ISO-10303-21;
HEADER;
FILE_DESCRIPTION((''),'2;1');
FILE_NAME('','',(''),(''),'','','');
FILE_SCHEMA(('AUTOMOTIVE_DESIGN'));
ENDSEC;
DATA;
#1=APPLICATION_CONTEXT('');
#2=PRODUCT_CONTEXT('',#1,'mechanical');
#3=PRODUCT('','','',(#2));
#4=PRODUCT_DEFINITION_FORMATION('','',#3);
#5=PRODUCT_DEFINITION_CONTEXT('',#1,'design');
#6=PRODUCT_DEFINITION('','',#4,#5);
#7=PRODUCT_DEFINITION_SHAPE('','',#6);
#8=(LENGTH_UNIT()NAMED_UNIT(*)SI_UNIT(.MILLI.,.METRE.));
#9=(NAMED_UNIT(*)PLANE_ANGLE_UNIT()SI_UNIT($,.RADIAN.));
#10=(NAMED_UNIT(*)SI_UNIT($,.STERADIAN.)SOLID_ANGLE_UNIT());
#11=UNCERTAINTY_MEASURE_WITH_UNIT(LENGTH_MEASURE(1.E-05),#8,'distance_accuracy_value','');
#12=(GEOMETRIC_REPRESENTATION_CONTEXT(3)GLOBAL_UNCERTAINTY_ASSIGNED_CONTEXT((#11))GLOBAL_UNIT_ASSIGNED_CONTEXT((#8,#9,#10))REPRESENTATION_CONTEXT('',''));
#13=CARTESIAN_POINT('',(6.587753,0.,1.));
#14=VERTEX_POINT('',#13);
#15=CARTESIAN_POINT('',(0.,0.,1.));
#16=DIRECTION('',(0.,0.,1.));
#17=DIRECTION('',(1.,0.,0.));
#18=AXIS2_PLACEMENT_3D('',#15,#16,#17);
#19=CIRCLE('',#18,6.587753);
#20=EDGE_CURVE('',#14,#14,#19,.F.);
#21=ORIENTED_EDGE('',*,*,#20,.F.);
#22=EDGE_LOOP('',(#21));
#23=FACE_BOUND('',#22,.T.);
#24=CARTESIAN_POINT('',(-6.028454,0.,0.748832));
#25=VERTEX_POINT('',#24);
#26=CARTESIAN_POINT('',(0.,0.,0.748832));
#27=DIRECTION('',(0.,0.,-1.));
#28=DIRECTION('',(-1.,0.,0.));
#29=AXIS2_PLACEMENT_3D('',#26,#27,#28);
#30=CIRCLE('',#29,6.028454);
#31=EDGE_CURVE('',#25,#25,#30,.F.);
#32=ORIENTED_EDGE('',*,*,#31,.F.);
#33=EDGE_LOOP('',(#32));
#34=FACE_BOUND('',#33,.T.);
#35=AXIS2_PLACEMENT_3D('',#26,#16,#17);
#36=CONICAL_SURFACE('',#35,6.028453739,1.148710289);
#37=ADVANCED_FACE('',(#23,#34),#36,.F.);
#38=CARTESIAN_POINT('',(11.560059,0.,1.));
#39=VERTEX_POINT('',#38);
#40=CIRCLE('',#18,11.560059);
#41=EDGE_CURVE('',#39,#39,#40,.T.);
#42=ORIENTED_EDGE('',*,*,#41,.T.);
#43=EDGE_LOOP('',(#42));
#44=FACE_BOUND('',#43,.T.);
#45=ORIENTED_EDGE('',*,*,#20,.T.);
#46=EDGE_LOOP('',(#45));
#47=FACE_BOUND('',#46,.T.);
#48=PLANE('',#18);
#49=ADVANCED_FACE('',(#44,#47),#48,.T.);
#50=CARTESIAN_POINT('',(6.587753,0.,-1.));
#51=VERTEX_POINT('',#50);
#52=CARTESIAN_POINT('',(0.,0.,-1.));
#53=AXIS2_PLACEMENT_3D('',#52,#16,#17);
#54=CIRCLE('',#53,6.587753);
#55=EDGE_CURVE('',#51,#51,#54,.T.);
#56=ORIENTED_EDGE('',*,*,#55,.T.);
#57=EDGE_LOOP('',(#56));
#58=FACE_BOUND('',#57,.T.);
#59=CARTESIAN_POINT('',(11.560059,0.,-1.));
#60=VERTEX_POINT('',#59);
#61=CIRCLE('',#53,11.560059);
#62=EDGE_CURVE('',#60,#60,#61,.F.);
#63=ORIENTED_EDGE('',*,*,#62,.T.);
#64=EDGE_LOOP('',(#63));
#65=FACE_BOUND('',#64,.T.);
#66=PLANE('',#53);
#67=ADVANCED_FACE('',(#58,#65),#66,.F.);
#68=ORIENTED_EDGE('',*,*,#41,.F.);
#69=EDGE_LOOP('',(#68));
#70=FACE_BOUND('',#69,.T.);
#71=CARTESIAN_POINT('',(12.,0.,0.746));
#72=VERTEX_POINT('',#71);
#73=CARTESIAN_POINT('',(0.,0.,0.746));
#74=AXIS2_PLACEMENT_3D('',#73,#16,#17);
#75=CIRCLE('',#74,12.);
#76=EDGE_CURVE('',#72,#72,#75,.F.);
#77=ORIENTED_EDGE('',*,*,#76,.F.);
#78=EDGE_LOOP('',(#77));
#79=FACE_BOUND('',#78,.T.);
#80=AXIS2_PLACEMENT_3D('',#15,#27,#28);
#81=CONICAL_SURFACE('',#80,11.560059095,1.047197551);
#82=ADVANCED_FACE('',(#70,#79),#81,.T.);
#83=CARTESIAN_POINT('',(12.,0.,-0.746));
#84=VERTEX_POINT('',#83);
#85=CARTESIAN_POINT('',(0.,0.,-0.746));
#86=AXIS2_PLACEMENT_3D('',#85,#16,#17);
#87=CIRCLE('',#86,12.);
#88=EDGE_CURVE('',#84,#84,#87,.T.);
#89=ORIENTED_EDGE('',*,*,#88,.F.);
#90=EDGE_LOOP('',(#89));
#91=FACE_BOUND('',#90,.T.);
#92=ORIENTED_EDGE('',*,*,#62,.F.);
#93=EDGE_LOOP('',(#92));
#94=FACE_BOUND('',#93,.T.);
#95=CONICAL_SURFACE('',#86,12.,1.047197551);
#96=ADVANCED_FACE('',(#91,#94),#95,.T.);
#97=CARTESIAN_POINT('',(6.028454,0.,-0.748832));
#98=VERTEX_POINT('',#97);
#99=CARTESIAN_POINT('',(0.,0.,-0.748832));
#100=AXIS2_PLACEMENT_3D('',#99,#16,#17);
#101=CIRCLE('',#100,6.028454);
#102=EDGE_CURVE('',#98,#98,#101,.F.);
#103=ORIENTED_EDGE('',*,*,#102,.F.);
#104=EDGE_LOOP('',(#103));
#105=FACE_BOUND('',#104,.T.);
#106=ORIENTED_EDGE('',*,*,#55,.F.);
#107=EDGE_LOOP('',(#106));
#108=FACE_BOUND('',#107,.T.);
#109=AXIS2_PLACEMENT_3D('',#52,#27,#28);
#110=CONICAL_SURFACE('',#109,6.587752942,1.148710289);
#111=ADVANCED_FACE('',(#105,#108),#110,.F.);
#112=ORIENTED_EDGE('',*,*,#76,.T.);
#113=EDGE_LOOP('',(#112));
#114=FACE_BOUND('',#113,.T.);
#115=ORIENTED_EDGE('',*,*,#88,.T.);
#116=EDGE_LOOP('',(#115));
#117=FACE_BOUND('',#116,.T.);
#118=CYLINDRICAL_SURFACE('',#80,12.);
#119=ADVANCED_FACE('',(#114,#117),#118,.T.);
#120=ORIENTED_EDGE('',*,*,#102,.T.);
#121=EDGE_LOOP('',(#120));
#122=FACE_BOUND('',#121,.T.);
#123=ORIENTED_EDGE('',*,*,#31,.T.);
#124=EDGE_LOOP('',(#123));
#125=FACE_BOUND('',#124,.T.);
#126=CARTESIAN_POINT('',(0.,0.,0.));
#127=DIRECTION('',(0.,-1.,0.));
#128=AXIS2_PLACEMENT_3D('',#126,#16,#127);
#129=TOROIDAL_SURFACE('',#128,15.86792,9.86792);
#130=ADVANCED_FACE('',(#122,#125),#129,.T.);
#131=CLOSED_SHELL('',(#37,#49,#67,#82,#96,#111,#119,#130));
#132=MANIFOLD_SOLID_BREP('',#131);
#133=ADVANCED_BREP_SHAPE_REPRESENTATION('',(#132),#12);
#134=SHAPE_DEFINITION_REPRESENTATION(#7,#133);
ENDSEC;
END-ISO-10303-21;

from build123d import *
from OCP.BRepFilletAPI import BRepFilletAPI_MakeChamfer

# Parameters (mm, degrees)
BOSS_EXTRUDE1_DEPTH      = 1
BOSS_EXTRUDE1_DEPTH_BACK = 1
SKETCH3_R                = 12
SKETCH3_R_2              = 6
CHAMFER1_SIZE            = 0.254
CHAMFER1_SIZE2           = 0.439940905
CHAMFER2_SIZE            = 0.536952942


with BuildPart() as part:
    # Sketch3 → Boss-Extrude1 (new, two sides: drawn at the far end of the back side and taken through both)
    with BuildSketch(Plane.XY.offset(-BOSS_EXTRUDE1_DEPTH_BACK)):
        Circle(SKETCH3_R)
        Circle(SKETCH3_R_2, mode=Mode.SUBTRACT)
    extrude(amount=BOSS_EXTRUDE1_DEPTH + BOSS_EXTRUDE1_DEPTH_BACK)

    # Chamfer1: one chamfer whose edges measure the first distance from different faces: ONE call of the kernel's chamfer builder (chamfer() names one face for all edges)
    chamfer1_edges_1 = [part.edges().sort_by_distance(p)[0] for p in [
        (-12, 0, 1),
    ]]
    chamfer1_side_1 = [part.faces().sort_by_distance(p)[0] for p in [
        (-12, 0, 0.5),
    ]]
    chamfer1_edges_2 = [part.edges().sort_by_distance(p)[0] for p in [
        (-12, 0, -1),
    ]]
    chamfer1_side_2 = [part.faces().sort_by_distance(p)[0] for p in [
        (-12, 0, -0.5),
    ]]
    chamfer1 = BRepFilletAPI_MakeChamfer(part.part.solid().wrapped)
    for e in chamfer1_edges_1:
        chamfer1.Add(CHAMFER1_SIZE, CHAMFER1_SIZE2, e.wrapped, chamfer1_side_1[0].wrapped)  # the first distance lies on this face
    for e in chamfer1_edges_2:
        chamfer1.Add(CHAMFER1_SIZE, CHAMFER1_SIZE2, e.wrapped, chamfer1_side_2[0].wrapped)  # the first distance lies on this face
    add(Compound.cast(chamfer1.Shape()), mode=Mode.REPLACE)

    # Sketch4 → Cut-Revolve1 (revolve, cut)
    with BuildSketch(Plane(origin=(0, 0, 0), x_dir=(0, 0, -1), z_dir=(1, 0, 0)), mode=Mode.PRIVATE) as cut_revolve1_sk:
        with BuildLine():
            Line((-1, 5.9492), (-1, 6.0508))
            ThreePointArc((-1, 6.0508), (0, 6), (1, 6.0508))
            Line((1, 6.0508), (1, 5.9492))
            Line((1, 5.9492), (-1, 5.9492))
        make_face()
    revolve(cut_revolve1_sk.sketch.rotate(Axis((0, 0, 1), (0, 0, -1)), 90), axis=Axis((0, 0, 1), (0, 0, -1)), mode=Mode.SUBTRACT)

    # Chamfer2
    # the kernel refuses this chamfer: 0.536952942, 0.254 mm, written as the material it takes off along each edge
    with BuildSketch(Plane(origin=(0, 0, -1), x_dir=(1, 0, 0), z_dir=(0, 1, 0))) as chamfer2_piece_1:
        with BuildLine():
            Line((6.0508 + CHAMFER2_SIZE, 0), (6.028453739, -0.251168371))
            ThreePointArc((6.028453739, -0.251168371), (6.038361074, -0.130738), (6.0508, 0))
            Line((6.0508, 0), (6.0508 + CHAMFER2_SIZE, 0))
        make_face()
    revolve(axis=Axis((0, 0, -1), (0, 0, -1)), mode=Mode.SUBTRACT)
    with BuildSketch(Plane(origin=(0, 0, 1), x_dir=(1, 0, 0), z_dir=(0, 1, 0))) as chamfer2_piece_2:
        with BuildLine():
            Line((6.0508 + CHAMFER2_SIZE, 0), (6.028453739, 0.251168371))
            ThreePointArc((6.028453739, 0.251168371), (6.038361074, 0.130738), (6.0508, 0))
            Line((6.0508, 0), (6.0508 + CHAMFER2_SIZE, 0))
        make_face()
    revolve(axis=Axis((0, 0, 1), (0, 0, -1)), mode=Mode.SUBTRACT)


solid = part.part
